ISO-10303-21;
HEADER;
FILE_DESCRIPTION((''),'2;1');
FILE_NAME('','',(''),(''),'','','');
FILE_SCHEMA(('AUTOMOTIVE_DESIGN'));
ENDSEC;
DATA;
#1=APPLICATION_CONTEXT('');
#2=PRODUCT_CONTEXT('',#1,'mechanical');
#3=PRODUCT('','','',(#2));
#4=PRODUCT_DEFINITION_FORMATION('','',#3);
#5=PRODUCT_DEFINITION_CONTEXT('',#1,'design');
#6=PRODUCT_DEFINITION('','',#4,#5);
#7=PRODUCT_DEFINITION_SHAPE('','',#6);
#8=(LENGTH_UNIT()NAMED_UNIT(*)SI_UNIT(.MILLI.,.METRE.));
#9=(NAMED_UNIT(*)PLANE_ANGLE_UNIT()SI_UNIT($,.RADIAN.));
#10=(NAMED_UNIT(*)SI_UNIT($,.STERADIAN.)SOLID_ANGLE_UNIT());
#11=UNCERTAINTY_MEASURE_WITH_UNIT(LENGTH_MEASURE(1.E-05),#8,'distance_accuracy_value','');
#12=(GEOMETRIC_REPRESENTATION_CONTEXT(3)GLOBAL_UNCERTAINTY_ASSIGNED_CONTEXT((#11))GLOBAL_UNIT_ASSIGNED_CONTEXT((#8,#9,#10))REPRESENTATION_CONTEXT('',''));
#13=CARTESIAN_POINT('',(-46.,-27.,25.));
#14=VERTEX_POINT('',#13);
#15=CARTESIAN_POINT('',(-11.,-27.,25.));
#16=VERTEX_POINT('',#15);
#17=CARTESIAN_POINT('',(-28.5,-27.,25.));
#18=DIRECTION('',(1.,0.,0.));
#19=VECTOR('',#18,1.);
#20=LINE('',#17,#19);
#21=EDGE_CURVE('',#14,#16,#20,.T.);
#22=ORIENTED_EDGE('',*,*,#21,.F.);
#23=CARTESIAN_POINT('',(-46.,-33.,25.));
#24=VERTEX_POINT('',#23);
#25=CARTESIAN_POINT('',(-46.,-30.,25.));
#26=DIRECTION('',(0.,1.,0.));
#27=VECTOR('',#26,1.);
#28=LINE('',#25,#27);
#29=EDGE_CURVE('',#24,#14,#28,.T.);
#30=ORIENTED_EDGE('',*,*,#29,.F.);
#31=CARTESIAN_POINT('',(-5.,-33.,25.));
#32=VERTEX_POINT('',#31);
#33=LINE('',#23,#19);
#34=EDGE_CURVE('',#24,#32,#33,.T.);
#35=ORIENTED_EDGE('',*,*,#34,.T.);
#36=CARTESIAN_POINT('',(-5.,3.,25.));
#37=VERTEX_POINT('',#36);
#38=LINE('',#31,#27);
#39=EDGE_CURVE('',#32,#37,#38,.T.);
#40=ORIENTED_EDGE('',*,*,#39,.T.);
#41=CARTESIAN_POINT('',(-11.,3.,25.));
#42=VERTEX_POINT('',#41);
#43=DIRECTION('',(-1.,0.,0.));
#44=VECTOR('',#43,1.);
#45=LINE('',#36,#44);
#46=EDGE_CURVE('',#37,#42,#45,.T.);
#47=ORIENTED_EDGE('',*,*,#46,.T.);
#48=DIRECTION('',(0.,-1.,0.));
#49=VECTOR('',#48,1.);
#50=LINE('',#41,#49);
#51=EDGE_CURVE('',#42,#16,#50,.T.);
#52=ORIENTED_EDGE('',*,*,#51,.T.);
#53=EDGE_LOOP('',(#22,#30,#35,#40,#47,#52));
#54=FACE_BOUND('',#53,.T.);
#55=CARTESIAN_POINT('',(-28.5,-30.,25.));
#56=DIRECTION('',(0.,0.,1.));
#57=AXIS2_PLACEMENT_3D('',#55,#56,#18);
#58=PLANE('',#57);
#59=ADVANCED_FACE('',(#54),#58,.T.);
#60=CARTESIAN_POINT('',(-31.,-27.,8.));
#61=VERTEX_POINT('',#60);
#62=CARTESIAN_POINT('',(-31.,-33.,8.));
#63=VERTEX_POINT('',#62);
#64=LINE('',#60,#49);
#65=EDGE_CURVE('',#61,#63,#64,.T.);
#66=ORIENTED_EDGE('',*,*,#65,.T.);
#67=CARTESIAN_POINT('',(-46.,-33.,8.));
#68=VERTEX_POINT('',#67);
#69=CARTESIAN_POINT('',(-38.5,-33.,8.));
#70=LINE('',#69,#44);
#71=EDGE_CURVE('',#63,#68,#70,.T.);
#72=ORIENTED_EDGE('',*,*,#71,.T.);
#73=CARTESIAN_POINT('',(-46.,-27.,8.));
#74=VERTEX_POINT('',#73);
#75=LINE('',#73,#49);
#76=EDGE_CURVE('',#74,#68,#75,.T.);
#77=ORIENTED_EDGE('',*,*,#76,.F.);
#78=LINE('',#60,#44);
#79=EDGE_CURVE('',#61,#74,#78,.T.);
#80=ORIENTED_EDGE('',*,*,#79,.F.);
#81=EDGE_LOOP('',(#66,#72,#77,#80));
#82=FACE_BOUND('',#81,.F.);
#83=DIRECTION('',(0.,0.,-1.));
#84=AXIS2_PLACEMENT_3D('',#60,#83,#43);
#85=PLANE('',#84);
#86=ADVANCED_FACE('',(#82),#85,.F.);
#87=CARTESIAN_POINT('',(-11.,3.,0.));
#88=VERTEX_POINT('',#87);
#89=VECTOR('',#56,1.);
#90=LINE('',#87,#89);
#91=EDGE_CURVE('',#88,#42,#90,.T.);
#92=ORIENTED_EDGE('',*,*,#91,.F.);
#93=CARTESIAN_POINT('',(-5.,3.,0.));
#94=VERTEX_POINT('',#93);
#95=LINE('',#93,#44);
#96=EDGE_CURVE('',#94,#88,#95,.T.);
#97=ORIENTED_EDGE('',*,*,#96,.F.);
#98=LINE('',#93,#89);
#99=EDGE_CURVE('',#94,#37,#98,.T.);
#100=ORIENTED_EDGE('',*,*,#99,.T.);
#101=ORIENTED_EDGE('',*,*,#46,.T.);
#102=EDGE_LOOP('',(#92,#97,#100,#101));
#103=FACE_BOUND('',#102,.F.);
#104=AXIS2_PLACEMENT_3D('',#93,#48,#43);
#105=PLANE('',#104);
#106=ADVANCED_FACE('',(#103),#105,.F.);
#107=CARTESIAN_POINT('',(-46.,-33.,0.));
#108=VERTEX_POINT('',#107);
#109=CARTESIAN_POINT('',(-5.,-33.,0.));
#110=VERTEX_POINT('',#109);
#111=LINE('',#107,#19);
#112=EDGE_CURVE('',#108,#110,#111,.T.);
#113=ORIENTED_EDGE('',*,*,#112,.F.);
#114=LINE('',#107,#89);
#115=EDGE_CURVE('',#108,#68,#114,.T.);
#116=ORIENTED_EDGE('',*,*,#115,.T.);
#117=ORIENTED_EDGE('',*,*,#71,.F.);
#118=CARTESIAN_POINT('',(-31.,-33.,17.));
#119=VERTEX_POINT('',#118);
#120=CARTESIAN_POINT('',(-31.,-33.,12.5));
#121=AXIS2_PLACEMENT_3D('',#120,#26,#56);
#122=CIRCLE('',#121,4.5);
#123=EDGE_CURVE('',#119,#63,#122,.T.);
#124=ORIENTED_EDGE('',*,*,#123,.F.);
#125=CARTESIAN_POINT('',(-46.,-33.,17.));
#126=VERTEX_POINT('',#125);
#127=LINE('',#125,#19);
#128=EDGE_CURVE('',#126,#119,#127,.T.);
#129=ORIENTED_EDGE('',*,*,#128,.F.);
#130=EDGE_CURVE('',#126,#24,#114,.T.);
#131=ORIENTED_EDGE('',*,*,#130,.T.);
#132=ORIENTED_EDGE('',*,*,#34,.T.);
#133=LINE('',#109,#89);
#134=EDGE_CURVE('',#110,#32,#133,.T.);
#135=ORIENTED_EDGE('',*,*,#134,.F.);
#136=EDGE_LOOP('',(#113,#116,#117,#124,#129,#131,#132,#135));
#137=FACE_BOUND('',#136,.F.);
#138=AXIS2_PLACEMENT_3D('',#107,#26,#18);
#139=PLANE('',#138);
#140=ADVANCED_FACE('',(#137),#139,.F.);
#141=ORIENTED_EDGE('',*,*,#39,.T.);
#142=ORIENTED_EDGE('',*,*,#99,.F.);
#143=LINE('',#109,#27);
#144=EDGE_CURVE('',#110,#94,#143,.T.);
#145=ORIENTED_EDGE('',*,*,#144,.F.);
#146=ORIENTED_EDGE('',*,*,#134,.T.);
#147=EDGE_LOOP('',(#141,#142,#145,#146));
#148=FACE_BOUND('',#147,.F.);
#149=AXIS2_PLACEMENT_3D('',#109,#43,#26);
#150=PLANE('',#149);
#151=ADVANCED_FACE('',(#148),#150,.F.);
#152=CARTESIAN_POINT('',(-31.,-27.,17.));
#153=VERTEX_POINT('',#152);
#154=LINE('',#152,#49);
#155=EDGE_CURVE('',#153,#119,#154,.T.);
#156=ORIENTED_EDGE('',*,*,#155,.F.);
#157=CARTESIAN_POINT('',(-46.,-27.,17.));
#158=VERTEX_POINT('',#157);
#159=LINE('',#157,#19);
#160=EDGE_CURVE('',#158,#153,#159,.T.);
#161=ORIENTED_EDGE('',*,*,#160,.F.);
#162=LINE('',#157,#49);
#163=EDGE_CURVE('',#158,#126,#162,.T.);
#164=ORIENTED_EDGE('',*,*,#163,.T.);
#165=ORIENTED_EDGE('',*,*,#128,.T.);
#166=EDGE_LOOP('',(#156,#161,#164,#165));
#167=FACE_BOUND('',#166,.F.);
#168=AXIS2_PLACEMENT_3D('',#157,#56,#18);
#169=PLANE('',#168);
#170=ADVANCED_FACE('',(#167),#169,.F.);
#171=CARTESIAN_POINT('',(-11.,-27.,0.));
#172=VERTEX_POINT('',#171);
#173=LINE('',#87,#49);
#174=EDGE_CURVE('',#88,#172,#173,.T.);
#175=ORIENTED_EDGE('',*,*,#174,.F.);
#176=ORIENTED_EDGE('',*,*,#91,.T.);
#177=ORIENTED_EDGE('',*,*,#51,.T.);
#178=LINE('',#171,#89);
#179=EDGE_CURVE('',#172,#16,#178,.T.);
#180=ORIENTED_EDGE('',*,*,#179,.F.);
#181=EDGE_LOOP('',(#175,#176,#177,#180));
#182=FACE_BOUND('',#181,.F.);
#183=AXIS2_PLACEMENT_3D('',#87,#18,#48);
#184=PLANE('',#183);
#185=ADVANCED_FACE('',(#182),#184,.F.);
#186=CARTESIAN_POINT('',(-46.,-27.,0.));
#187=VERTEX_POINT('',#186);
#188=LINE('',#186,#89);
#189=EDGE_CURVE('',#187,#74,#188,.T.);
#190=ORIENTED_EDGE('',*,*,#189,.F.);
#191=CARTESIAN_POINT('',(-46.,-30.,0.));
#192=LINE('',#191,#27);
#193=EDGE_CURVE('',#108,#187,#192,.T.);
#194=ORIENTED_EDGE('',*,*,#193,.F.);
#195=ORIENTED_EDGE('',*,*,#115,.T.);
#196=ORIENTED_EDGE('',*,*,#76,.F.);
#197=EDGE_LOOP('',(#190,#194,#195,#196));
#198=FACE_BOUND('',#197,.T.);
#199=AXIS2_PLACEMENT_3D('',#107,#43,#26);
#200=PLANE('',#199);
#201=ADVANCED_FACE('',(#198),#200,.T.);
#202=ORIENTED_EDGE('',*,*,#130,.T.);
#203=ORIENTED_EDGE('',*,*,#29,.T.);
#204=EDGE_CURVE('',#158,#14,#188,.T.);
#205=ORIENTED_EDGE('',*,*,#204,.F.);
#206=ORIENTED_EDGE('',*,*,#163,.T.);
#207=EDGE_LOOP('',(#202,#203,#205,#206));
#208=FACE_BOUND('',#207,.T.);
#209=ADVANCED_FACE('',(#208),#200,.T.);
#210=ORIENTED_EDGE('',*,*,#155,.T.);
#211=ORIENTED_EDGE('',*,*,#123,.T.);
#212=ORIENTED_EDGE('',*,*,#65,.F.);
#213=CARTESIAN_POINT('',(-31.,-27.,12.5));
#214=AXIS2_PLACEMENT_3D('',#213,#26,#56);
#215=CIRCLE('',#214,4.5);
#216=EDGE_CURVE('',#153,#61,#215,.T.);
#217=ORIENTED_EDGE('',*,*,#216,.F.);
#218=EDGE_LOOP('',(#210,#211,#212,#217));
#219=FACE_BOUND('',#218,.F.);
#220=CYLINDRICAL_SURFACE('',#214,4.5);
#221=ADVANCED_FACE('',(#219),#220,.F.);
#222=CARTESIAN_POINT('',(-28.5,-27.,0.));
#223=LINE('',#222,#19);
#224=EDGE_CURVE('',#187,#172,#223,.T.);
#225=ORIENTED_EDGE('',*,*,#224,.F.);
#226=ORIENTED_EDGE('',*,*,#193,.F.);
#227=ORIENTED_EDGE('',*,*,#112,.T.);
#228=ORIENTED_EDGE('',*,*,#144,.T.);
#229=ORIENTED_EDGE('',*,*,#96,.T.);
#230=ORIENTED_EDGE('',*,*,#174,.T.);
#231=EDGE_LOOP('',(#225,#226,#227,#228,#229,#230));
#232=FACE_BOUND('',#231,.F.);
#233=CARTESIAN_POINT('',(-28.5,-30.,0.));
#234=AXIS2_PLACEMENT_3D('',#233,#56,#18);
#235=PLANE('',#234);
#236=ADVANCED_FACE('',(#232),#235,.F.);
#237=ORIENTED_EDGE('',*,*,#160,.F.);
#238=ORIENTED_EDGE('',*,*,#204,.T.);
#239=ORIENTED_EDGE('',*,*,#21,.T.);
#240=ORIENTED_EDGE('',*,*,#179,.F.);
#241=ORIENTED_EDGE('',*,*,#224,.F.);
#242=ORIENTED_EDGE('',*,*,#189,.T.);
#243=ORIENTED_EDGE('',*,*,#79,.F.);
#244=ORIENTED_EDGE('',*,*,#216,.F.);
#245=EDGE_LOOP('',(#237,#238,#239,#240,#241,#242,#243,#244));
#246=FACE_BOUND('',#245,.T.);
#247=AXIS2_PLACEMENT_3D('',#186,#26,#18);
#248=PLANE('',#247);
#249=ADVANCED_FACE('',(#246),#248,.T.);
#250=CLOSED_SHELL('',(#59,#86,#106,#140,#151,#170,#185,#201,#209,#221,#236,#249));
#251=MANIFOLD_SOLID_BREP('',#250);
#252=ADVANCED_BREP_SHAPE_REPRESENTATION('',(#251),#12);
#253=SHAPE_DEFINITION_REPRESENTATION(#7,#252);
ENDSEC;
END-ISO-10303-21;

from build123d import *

# Parameters (mm, degrees)
F0_W     = 35
F0_H     = 6
F1_DEPTH = 25
F3_DEPTH = 25
F4_DEPTH = 25


# Not quite as in the source:
# - a feature names something its author has since deleted; it is built from what else it names


with BuildPart() as f1:
    # F0 (on Top) → F1 (new body)
    with BuildSketch(Plane.XY):
        with Locations((-28.5, -30)):
            Rectangle(F0_W, F0_H)
        Polygon((-5, 3), (-11, 3), (-11, -3), (-11, -27), (-11, -33), (-5, -33), (-5, -3), align=None)
    extrude(amount=F1_DEPTH)

    # F2 (on face) → F3 (cut)
    with BuildSketch(Plane(origin=(0, -27, 0), x_dir=(-1, 0, 0), z_dir=(0, 1, 0))):
        with BuildLine():
            ThreePointArc((31, 8), (34.1819805153, 9.3180194847), (35.5, 12.5))
            ThreePointArc((35.5, 12.5), (34.1819805153, 15.6819805153), (31, 17))
            ThreePointArc((31, 17), (26.5, 12.5), (31, 8))
        make_face()
    extrude(amount=-F3_DEPTH, mode=Mode.SUBTRACT)

    # F2 (on face) → F4 (cut)
    with BuildSketch(Plane(origin=(0, -27, 0), x_dir=(-1, 0, 0), z_dir=(0, 1, 0))):
        with BuildLine():
            ThreePointArc((31, 17), (34.1819805153, 15.6819805153), (35.5, 12.5))
            ThreePointArc((35.5, 12.5), (34.1819805153, 9.3180194847), (31, 8))
            Line((31, 8), (46, 8))
            Line((46, 8), (46, 17))
            Line((46, 17), (31, 17))
        make_face()
    extrude(amount=-F4_DEPTH, mode=Mode.SUBTRACT)


solid = f1.part
